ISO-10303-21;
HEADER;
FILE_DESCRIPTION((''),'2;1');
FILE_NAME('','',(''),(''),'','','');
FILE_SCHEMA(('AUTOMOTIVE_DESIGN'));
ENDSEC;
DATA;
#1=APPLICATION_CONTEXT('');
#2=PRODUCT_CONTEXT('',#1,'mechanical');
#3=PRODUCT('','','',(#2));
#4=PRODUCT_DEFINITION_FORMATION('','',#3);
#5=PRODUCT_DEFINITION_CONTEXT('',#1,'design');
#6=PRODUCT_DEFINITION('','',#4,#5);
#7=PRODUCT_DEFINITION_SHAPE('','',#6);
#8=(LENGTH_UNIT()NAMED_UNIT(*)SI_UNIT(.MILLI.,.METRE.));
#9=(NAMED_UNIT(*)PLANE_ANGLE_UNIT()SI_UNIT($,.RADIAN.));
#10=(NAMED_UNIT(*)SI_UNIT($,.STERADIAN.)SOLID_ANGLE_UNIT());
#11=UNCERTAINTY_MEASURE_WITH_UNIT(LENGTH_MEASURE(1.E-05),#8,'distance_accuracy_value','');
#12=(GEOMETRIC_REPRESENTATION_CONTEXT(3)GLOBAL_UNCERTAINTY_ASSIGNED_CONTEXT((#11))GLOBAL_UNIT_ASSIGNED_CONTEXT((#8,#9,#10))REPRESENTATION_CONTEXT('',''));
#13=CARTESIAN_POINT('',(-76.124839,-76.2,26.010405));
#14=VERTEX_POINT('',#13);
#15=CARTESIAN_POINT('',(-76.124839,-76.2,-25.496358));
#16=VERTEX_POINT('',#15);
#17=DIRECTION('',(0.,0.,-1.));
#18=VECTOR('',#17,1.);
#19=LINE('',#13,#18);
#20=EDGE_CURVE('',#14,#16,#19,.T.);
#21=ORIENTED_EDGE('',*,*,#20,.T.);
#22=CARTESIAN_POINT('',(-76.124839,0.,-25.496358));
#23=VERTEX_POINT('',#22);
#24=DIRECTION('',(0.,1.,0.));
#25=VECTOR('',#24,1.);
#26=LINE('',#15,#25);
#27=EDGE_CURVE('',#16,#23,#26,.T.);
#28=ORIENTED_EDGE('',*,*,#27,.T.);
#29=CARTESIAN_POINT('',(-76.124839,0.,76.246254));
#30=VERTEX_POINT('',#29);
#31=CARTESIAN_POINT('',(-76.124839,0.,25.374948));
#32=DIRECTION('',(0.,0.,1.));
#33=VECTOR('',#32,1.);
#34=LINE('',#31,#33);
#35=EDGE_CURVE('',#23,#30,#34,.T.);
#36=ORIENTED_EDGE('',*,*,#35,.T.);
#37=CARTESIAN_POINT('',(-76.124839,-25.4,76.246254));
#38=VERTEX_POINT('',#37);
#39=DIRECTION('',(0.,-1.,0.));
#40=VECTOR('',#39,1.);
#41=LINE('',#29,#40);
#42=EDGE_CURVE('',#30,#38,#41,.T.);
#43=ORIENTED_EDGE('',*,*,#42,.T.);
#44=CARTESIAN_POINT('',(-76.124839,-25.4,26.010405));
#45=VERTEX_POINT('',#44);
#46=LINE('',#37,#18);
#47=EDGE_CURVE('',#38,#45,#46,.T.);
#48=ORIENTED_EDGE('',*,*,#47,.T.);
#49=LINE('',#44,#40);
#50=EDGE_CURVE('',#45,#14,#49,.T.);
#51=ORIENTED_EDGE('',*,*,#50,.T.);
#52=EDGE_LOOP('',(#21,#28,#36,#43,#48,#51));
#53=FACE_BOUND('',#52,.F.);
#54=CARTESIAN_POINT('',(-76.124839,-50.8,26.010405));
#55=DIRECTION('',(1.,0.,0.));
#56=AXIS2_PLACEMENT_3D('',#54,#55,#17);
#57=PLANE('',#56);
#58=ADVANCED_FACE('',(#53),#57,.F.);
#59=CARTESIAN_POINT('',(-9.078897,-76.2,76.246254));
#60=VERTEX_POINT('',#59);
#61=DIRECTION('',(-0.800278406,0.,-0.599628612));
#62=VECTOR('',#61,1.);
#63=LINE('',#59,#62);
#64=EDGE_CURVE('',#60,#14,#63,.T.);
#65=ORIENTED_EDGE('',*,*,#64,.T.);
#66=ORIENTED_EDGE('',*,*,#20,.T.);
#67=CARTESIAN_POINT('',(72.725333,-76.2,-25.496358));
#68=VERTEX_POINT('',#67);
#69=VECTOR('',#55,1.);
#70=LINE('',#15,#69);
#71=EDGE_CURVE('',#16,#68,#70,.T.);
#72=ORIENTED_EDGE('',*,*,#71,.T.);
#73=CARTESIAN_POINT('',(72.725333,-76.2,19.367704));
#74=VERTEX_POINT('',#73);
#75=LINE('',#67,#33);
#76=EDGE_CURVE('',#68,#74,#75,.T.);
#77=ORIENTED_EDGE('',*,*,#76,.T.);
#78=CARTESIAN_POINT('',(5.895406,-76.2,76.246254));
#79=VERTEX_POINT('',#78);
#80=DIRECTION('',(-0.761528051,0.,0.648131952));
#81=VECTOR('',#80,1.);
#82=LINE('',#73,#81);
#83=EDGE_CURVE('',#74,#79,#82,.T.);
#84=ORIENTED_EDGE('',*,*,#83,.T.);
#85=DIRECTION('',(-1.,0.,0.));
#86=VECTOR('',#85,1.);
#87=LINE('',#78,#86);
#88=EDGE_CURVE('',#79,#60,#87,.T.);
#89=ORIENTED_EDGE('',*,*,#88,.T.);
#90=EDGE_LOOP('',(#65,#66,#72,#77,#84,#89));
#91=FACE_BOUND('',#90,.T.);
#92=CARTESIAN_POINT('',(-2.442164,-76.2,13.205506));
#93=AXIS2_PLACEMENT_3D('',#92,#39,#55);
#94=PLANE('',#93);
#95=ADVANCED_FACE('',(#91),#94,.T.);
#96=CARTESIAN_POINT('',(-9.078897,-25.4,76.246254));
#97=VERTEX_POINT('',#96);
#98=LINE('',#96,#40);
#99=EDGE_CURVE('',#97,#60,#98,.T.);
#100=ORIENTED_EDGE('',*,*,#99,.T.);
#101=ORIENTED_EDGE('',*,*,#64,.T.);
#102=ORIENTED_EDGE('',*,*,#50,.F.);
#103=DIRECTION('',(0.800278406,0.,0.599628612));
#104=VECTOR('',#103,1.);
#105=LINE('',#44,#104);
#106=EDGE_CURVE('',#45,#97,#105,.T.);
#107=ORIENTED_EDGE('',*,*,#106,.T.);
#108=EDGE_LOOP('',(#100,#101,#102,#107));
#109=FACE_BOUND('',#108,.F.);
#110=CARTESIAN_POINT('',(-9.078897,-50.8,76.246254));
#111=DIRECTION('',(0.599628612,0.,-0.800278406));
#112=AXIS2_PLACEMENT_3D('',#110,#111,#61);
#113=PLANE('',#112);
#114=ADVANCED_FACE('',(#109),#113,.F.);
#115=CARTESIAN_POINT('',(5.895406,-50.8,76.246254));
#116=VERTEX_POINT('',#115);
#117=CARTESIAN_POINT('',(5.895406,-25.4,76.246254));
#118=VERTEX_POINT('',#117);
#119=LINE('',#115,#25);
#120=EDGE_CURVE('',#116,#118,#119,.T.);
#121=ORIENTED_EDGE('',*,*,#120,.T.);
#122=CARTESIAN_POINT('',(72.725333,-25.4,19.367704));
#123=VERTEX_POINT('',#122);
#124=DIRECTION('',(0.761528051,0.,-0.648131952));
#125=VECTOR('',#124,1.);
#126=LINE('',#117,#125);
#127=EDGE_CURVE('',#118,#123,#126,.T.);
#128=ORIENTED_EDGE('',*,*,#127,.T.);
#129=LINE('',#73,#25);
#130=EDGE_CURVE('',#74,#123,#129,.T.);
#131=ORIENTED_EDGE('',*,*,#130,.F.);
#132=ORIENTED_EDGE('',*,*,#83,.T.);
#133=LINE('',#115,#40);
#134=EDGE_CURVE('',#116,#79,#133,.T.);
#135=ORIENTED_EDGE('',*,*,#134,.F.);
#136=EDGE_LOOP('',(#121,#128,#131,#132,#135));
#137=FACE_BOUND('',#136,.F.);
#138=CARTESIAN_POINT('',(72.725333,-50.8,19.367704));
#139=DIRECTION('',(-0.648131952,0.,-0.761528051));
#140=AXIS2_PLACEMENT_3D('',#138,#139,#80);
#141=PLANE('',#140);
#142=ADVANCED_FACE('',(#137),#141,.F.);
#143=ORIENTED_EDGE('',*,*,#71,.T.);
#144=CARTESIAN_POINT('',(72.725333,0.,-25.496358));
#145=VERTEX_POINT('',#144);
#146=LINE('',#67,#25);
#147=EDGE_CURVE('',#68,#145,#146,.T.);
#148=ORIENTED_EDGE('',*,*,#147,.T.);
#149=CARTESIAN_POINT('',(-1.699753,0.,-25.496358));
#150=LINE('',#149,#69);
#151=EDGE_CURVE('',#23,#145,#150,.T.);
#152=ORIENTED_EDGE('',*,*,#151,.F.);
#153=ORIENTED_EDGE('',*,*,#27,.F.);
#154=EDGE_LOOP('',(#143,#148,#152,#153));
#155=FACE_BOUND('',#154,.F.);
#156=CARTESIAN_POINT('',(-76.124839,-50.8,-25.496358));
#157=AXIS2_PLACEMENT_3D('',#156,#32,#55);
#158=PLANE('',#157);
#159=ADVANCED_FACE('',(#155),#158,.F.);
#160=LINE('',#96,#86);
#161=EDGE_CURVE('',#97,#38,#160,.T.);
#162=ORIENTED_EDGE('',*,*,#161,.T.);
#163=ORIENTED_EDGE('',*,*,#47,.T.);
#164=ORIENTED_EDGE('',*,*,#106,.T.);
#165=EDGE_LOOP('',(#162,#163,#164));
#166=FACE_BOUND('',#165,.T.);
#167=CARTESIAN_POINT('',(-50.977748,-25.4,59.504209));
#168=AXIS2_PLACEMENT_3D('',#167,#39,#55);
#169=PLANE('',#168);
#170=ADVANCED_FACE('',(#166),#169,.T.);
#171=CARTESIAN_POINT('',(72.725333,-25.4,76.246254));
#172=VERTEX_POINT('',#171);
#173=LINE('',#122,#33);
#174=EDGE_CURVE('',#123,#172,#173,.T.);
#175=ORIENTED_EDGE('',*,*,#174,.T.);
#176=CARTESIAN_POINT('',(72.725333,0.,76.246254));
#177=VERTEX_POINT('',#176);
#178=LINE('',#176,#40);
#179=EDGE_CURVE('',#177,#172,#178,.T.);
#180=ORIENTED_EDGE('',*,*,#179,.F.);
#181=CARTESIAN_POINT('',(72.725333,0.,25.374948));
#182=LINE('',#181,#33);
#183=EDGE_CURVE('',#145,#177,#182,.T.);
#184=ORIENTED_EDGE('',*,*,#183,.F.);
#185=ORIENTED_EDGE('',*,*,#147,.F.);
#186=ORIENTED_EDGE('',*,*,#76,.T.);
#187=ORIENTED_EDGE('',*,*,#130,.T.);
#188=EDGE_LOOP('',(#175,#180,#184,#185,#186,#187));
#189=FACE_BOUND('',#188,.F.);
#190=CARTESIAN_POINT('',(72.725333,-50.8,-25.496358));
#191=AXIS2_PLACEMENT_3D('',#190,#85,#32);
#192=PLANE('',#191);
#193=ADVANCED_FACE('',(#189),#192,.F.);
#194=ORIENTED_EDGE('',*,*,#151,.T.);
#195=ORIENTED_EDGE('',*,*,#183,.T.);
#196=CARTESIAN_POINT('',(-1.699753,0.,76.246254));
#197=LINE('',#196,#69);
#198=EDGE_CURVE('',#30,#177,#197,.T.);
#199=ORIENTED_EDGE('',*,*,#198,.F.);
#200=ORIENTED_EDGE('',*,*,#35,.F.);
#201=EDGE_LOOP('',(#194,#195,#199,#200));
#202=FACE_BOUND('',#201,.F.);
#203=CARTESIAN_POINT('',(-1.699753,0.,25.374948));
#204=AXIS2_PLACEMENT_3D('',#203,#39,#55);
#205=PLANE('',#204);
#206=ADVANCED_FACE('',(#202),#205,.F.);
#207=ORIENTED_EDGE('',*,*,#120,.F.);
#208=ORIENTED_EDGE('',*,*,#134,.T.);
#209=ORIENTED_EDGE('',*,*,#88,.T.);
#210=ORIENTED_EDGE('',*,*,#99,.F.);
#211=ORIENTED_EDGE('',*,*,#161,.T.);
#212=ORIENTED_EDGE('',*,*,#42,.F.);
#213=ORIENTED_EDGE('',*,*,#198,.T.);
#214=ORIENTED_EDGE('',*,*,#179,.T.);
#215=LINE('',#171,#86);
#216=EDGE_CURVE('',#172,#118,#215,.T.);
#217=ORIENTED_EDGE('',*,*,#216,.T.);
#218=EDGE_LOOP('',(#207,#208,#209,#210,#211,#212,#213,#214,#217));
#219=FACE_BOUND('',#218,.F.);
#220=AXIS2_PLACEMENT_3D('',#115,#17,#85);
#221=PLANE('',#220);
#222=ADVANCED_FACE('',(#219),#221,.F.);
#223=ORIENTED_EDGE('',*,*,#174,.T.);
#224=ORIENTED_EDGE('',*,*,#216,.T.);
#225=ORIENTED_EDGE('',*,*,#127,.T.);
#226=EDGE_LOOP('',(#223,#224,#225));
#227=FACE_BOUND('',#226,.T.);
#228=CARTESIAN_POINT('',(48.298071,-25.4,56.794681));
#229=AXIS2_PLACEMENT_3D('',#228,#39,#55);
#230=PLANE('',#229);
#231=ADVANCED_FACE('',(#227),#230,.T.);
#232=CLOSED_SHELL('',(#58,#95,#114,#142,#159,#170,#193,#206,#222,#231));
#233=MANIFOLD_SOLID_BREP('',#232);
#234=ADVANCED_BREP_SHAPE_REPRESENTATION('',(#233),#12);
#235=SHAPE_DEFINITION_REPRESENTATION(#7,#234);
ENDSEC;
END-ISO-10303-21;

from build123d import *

# Parameters (mm, degrees)
F0_W     = 148.8501727581
F0_H     = 101.742612198
F1_DEPTH = 50.8
F3_DEPTH = 25.4
F5_DEPTH = 25.4


with BuildPart() as f1:
    # F0 (on Front) → F1 (new body)
    with BuildSketch(Plane.XZ):
        with Locations((-1.6997531056, 25.3749480471)):
            Rectangle(F0_W, F0_H)
    extrude(amount=F1_DEPTH)

    # F2 (on face) → F3 (cut)
    with BuildSketch(Plane.XZ.offset(50.8)):
        Polygon((-9.0788973585, 76.2462541461), (-76.1248394847, 76.2462541461), (-76.1248394847, 26.0104050889), align=None)
        Polygon((72.7253332734, 76.2462541461), (5.8954056378, 76.2462541461), (72.7253332734, 19.3677039224), align=None)
    extrude(amount=-F3_DEPTH, mode=Mode.SUBTRACT)

    # F1_face (on face) + F4 (on face) → F5 (join)
    with BuildSketch(Plane(origin=(-1.6997531056, -50.8, 25.3749480471), x_dir=(1, 0, 0), z_dir=(0, -1, 0))):
        Polygon((74.4250863791, -6.0072441247), (7.5951587435, 50.871306099), (-7.3791442529, 50.871306099), (-74.4250863791, 0.6354570418), (-74.4250863791, -50.871306099), (74.4250863791, -50.871306099), align=None)
    with BuildSketch(Plane.XZ.offset(50.8)):
        Polygon((72.7253332734, -25.4963580519), (72.7253332734, 19.3677039224), (5.8954056378, 76.2462541461), (-9.0788973585, 76.2462541461), (-76.1248394847, 26.0104050889), (-76.1248394847, -25.4963580519), align=None)
    extrude(amount=F5_DEPTH)


solid = f1.part
